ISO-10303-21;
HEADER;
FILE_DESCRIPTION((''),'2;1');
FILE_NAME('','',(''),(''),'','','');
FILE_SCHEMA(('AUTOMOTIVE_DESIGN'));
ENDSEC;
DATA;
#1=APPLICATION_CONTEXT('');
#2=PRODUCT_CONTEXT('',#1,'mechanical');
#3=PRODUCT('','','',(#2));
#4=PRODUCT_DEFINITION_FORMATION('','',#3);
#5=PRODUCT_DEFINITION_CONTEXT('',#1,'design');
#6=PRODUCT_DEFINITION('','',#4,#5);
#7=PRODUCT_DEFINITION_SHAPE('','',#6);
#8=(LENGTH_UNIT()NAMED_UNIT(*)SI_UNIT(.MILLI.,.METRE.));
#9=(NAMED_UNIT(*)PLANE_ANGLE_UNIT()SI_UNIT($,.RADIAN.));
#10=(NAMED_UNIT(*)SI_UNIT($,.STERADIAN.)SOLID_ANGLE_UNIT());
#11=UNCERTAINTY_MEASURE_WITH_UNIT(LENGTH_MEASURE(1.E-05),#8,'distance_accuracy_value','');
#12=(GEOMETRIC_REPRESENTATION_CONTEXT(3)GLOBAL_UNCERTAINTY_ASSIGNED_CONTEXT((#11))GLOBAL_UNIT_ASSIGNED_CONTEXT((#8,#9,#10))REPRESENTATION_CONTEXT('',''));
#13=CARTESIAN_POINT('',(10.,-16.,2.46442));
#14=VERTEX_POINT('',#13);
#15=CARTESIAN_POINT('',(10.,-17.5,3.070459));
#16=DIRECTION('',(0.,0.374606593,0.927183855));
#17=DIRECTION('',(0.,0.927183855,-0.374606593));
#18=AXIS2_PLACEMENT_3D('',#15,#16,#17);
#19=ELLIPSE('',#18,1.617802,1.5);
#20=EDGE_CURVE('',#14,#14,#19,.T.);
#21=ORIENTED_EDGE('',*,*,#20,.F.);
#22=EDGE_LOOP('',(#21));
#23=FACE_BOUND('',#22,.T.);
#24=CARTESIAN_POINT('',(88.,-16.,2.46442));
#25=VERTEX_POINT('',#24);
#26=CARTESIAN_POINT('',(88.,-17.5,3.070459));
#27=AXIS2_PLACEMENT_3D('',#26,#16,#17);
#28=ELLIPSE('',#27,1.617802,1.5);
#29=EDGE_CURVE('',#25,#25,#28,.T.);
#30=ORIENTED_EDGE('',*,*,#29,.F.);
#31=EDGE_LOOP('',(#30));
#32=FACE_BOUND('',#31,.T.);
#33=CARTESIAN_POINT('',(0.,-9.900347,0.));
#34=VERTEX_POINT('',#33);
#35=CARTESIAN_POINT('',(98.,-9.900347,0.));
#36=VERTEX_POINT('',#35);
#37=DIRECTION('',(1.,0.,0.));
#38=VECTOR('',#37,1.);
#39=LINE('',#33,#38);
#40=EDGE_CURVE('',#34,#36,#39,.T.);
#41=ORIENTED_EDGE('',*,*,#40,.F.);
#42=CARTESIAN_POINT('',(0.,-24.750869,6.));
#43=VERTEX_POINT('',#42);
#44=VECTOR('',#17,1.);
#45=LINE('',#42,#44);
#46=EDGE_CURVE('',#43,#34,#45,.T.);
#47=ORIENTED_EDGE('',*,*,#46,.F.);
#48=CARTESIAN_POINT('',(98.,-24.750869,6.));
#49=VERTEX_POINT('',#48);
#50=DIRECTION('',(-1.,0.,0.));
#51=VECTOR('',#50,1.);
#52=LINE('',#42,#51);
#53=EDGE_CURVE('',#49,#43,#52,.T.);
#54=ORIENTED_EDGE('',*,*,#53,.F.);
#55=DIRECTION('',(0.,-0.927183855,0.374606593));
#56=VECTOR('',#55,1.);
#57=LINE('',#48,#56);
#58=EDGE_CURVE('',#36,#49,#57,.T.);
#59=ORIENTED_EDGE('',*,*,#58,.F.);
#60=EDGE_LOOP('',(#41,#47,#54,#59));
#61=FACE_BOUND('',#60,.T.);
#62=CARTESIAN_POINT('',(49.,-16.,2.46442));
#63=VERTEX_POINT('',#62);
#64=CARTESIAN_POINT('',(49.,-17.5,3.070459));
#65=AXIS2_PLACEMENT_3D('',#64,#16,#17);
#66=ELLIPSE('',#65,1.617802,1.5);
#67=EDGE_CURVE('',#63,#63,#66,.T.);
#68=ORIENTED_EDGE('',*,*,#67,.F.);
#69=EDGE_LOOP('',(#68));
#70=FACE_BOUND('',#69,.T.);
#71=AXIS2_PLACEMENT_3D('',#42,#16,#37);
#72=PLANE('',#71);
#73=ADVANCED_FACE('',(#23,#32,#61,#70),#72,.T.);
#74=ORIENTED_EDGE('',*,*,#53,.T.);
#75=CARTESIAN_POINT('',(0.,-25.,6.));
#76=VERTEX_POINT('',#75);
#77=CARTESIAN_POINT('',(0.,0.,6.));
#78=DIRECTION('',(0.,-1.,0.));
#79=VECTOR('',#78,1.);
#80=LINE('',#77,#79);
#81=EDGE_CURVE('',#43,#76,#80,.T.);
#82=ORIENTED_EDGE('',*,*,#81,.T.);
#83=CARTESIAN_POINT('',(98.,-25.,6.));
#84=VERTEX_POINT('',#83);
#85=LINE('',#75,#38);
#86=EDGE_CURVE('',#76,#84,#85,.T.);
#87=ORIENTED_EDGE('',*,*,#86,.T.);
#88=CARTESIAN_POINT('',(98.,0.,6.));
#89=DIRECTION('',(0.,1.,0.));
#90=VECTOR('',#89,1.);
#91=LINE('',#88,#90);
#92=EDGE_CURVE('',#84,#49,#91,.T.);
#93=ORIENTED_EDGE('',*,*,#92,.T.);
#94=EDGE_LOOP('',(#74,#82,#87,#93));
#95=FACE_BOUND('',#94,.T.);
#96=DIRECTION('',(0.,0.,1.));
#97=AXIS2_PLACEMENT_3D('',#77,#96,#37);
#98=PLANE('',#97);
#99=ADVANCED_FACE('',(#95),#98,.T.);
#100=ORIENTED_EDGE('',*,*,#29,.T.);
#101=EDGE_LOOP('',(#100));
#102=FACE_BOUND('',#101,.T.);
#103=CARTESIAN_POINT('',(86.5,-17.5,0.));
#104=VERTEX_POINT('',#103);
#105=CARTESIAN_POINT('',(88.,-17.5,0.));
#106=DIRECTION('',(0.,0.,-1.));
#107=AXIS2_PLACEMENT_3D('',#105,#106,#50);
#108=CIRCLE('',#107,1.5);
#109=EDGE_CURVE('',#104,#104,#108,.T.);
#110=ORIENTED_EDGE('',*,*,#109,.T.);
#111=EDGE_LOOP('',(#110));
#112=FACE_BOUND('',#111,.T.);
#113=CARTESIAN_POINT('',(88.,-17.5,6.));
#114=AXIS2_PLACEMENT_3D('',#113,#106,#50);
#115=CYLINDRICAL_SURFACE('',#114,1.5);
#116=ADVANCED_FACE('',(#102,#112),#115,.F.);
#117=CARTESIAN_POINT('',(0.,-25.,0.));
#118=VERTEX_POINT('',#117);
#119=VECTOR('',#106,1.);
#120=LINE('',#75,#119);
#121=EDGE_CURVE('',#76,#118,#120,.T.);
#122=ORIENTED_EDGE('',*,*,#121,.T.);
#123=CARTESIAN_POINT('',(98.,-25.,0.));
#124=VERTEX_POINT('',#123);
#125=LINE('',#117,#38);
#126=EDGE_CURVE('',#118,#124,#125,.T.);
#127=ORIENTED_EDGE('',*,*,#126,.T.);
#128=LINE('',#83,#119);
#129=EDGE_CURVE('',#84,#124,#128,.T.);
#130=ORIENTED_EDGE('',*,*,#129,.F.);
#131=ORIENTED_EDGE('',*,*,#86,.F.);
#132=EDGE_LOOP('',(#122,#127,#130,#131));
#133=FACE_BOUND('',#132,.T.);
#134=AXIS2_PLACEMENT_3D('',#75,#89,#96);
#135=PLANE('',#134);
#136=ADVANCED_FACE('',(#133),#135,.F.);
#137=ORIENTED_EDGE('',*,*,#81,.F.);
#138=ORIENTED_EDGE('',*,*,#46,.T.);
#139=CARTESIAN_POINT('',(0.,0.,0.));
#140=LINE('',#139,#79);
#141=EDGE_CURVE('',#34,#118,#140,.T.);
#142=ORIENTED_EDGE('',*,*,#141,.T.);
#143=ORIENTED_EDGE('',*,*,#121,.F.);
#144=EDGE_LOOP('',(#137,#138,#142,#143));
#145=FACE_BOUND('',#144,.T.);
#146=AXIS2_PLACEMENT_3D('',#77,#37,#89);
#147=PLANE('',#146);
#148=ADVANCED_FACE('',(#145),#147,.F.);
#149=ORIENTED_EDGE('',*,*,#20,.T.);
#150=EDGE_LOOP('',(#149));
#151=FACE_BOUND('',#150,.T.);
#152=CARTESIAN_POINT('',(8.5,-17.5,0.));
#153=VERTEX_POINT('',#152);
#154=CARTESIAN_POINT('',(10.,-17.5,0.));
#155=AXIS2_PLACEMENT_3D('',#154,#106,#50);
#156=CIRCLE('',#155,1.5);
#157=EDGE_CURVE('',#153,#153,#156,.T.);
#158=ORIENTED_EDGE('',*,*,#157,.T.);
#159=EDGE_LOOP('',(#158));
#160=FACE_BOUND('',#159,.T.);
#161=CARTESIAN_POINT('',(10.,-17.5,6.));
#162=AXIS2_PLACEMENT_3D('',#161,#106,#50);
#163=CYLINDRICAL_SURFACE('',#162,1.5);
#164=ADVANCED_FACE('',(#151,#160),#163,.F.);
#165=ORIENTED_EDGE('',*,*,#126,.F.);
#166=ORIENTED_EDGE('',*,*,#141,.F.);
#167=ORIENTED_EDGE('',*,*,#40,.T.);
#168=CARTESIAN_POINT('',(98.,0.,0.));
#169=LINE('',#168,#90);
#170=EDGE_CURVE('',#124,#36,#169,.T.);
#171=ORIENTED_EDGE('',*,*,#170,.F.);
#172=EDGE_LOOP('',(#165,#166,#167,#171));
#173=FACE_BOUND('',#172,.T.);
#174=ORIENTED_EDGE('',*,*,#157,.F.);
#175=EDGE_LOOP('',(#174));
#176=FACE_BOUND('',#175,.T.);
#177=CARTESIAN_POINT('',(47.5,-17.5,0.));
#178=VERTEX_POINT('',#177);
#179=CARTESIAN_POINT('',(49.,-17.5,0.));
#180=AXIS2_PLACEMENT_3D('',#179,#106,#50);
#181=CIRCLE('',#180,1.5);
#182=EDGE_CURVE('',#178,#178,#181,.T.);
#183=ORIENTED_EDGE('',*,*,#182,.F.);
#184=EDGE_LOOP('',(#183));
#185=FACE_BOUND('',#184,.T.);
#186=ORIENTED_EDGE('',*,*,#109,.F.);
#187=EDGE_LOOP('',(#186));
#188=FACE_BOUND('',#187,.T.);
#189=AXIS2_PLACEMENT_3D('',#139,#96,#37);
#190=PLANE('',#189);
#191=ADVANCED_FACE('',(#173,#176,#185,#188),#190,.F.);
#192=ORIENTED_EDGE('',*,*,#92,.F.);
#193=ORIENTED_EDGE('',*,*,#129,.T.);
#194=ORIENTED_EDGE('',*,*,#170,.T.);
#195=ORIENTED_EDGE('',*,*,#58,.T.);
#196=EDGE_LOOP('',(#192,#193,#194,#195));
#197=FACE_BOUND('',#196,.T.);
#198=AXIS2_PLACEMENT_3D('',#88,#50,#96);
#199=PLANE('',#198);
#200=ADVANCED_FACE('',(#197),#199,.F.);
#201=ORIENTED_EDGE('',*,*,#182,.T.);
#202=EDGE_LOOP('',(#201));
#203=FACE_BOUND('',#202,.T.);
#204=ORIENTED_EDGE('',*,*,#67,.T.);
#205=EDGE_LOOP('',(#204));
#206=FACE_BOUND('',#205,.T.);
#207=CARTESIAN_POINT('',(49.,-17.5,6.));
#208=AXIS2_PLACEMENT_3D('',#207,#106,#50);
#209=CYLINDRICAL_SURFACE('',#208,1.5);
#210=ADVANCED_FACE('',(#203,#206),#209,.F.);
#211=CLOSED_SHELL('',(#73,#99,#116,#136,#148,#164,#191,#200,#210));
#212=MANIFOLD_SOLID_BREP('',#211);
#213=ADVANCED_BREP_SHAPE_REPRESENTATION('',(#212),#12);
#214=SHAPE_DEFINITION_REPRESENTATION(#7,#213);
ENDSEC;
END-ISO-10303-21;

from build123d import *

# Parameters (mm, degrees)
ESBO_O1_W                = 98
ESBO_O1_H                = 25
RESSALTO_EXTRUS_O1_DEPTH = 6
CHANFRO1_SIZE            = 10
CHANFRO1_SIZE_2          = 24.750868534
ESBO_O3_R                = 1.5
CORTE_EXTRUS_O1_DEPTH    = 6


with BuildPart() as part:
    # Esboço1 → Ressalto-extrusão1 (new body)
    with BuildSketch(Plane.XY):
        with Locations((49, -12.5)):
            Rectangle(ESBO_O1_W, ESBO_O1_H)
    extrude(amount=RESSALTO_EXTRUS_O1_DEPTH)

    # Chanfro1
    # the kernel refuses this chamfer: 24.750868534, 10 mm, written as the material it takes off along each edge
    with BuildSketch(Plane(origin=(-64.178729721, 0, 6), x_dir=(0, 0.0881670647319357, -0.9961057015681392), z_dir=(1, 0, 0))) as chanfro1_piece_1:
        Polygon((CHANFRO1_SIZE * 0.996105701568, -CHANFRO1_SIZE * 0.0881670647319), (-CHANFRO1_SIZE_2 * 0.0881670647325, -CHANFRO1_SIZE_2 * 0.996105701575), (0, 0), align=None)
    extrude(amount=226.357459443, mode=Mode.SUBTRACT)

    # Esboço3 → Corte-extrusão1 (cut)
    with BuildSketch(Plane(origin=(0, 0, 0), x_dir=(-1, 0, 0), z_dir=(0, 0, -1))):
        with Locations((-49, -17.5)):
            Circle(ESBO_O3_R)
        with Locations((-10, -17.5)):
            Circle(ESBO_O3_R)
        with Locations((-88, -17.5)):
            Circle(ESBO_O3_R)
    extrude(amount=-CORTE_EXTRUS_O1_DEPTH, mode=Mode.SUBTRACT)


solid = part.part
